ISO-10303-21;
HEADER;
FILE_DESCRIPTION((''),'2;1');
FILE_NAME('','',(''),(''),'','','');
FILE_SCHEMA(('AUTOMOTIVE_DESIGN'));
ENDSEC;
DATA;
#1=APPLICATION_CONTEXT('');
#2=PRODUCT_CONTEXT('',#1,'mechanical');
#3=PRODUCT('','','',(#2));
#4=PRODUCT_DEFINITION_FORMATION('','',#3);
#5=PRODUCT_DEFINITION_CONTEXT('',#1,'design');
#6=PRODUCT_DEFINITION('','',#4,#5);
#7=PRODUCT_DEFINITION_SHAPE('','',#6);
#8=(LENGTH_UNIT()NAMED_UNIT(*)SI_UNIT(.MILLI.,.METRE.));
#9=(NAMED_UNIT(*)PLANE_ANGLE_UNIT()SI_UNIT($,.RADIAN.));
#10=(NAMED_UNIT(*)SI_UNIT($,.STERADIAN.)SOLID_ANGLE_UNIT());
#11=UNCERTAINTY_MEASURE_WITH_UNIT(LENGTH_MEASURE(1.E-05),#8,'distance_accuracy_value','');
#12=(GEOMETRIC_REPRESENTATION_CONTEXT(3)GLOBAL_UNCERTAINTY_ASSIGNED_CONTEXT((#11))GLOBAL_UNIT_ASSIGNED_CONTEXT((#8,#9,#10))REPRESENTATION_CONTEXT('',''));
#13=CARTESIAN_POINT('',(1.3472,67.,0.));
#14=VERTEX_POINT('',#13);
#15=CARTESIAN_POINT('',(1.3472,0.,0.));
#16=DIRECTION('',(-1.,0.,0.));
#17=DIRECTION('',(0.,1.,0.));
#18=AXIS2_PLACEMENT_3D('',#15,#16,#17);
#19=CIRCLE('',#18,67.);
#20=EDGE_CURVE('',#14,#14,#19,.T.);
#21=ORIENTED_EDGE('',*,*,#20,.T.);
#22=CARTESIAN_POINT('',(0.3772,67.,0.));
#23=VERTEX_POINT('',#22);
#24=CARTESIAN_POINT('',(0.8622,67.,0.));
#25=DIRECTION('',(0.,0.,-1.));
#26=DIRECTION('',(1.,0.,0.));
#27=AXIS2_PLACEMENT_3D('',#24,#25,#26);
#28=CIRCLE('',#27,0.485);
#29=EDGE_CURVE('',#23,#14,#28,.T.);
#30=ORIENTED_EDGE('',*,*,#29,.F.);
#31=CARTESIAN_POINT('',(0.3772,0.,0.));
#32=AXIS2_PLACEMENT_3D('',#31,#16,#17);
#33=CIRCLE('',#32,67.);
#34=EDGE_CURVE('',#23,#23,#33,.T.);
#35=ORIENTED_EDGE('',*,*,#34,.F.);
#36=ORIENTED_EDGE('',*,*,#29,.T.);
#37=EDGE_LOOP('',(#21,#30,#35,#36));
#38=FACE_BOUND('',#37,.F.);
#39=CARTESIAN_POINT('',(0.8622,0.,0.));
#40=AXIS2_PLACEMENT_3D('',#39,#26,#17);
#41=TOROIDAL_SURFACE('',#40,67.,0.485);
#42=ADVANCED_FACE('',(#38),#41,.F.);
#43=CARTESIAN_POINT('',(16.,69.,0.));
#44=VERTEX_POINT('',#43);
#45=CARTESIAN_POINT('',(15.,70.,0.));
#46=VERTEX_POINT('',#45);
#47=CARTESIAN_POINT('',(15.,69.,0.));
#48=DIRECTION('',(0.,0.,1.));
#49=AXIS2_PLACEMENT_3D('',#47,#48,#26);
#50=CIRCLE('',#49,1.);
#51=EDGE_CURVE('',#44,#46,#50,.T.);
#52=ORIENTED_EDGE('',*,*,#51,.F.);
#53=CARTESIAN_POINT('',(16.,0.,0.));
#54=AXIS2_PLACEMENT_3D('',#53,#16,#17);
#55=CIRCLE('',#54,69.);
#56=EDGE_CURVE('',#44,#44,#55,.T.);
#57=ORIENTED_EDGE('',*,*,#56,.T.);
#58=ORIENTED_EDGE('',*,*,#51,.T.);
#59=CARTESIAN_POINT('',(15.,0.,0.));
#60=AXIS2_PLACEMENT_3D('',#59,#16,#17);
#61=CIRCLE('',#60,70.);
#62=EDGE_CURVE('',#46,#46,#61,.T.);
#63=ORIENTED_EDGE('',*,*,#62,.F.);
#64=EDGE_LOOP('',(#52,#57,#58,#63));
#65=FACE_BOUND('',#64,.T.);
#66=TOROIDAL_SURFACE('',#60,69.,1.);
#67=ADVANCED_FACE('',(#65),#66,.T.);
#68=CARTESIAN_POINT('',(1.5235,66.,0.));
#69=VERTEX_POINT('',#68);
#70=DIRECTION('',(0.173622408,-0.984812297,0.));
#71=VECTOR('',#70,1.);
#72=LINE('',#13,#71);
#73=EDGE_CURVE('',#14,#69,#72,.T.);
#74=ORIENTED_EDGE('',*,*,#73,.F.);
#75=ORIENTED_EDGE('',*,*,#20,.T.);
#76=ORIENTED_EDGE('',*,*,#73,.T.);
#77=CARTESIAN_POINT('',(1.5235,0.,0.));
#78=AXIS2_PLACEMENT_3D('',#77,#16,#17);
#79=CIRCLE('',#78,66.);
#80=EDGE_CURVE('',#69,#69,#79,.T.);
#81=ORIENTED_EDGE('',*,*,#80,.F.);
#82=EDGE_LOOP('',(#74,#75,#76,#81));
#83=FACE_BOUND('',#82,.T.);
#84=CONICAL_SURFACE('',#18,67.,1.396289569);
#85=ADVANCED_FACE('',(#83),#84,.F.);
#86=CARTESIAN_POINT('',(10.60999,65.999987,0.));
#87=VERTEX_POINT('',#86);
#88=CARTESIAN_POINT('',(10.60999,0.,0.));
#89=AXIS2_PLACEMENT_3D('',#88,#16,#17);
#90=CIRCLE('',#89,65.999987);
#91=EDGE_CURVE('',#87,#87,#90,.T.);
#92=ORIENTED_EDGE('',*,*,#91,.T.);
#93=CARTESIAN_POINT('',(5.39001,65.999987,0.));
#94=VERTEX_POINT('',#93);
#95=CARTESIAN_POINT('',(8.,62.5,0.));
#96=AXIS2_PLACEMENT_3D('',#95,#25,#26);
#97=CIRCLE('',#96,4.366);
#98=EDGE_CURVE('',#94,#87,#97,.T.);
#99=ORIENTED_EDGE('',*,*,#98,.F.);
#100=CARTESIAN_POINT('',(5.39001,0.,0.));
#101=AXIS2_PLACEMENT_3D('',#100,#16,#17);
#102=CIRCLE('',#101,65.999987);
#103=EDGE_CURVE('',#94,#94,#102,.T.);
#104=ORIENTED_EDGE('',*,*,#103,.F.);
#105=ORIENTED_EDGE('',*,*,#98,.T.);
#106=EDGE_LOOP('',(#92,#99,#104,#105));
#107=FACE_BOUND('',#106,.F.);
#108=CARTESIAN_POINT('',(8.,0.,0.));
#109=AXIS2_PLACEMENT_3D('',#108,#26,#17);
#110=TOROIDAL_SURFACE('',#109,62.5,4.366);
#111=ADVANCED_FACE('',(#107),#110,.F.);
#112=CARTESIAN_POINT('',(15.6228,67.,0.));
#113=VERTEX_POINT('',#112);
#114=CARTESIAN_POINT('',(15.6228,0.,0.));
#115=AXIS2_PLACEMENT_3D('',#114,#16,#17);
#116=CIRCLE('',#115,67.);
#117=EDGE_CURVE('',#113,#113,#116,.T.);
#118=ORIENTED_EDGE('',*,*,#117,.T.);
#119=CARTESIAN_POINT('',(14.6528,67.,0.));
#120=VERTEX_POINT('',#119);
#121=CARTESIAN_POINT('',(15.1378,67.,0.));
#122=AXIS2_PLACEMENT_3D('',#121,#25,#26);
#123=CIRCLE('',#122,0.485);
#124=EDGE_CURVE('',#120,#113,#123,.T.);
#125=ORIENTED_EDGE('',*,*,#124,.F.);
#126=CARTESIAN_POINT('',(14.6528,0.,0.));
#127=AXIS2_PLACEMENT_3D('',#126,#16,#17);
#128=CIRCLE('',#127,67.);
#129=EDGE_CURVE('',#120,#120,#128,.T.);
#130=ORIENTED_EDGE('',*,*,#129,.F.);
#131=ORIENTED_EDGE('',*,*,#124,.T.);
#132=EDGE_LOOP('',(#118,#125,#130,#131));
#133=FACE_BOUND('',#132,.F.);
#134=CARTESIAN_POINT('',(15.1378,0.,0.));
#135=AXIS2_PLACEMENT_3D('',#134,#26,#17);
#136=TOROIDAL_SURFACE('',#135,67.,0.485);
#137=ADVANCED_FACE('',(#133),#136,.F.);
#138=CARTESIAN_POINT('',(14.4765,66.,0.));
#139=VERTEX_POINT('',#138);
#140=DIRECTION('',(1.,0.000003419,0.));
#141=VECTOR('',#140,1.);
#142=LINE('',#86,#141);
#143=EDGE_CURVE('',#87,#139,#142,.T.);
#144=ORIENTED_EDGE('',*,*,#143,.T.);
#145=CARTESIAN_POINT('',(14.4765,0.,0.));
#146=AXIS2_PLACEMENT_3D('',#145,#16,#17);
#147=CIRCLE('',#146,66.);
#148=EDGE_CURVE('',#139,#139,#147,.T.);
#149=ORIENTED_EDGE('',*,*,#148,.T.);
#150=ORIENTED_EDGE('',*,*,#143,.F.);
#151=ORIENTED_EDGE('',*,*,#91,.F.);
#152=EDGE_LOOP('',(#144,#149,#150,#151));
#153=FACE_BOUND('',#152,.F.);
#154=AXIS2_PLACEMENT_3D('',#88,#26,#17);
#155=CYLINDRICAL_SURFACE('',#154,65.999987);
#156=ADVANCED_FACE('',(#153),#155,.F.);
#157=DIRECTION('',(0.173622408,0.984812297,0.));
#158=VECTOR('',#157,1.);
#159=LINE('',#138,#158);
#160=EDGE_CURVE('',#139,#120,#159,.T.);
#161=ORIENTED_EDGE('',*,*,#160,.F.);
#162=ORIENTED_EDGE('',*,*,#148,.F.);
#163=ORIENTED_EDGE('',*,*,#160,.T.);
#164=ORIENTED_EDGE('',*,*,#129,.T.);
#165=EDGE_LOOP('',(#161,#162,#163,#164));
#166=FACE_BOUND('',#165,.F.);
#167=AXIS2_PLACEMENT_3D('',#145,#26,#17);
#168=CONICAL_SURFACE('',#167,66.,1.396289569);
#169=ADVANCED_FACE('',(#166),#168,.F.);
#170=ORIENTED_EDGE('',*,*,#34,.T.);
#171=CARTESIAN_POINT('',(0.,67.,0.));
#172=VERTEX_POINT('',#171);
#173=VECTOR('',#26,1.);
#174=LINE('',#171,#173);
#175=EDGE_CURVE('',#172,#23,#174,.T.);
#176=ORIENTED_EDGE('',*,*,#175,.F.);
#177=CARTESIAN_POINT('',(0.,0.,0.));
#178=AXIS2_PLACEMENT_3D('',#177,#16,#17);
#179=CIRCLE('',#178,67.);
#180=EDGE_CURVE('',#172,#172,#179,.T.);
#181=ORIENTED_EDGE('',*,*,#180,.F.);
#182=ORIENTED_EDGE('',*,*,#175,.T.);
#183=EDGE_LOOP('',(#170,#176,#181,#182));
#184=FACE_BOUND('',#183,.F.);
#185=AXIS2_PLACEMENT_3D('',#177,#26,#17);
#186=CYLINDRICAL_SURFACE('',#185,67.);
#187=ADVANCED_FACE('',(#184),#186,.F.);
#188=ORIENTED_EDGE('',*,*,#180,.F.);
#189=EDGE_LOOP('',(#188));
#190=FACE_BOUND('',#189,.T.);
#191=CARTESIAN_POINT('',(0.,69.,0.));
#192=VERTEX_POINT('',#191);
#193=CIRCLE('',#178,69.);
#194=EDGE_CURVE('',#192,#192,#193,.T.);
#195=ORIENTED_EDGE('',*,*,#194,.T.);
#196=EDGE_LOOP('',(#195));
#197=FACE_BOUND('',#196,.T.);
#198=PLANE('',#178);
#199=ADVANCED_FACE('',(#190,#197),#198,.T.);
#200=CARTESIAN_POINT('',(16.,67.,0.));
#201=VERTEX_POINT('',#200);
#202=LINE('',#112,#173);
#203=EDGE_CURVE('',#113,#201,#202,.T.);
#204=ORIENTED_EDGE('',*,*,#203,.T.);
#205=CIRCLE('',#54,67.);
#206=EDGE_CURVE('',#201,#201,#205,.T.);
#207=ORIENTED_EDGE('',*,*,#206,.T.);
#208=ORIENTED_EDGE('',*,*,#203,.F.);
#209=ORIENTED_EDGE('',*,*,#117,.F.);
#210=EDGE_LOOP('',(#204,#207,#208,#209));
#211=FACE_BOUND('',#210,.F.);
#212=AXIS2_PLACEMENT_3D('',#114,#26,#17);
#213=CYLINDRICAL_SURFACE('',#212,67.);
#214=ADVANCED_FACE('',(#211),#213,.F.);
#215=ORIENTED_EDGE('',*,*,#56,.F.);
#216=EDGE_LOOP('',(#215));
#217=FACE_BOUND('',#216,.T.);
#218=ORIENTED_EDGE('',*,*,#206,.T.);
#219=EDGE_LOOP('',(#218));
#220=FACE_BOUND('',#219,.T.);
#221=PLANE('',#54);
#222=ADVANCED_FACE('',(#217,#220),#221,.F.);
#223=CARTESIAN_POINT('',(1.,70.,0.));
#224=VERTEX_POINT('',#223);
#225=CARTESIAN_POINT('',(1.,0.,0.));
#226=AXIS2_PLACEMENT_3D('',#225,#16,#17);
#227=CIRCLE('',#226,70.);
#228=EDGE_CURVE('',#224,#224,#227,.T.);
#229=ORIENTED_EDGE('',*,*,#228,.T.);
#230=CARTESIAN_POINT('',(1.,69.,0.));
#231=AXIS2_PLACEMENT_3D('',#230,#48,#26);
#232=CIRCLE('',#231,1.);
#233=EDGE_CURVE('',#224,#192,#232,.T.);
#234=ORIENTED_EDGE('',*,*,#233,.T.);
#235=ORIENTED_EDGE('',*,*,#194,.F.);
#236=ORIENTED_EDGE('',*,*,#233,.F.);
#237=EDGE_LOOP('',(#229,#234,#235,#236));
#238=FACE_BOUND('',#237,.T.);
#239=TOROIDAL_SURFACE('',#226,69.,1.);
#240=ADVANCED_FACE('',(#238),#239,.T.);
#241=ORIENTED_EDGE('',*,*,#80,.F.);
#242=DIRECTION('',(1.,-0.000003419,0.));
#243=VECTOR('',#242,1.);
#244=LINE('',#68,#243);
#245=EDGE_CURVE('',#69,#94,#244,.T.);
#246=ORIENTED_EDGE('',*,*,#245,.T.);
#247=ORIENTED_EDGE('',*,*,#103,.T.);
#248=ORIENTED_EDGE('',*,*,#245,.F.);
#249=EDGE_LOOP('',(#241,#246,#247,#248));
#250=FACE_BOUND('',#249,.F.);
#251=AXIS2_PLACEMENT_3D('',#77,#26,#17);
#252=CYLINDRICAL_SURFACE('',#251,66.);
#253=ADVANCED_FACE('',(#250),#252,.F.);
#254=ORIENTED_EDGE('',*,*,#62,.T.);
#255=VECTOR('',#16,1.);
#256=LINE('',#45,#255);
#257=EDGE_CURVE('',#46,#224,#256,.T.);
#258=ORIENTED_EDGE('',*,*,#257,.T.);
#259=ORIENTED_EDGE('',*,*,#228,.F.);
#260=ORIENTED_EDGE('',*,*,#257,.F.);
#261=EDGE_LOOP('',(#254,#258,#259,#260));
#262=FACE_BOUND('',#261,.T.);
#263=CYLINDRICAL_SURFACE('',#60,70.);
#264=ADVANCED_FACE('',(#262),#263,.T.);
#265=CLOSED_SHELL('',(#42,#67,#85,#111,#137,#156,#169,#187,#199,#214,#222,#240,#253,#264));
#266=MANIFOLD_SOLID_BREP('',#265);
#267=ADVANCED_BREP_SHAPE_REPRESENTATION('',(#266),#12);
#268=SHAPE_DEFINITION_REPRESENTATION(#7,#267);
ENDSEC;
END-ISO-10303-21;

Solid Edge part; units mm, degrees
sketch "Sketch1" plane through (0, 0, 0) normal (0, 0, 1) x (1, 0, 0)
  line L0 (0, 69) -> (0, 67)
  line L1 (0, 67) -> (0.3772, 67)
  arc A0 (0.3772, 67) -> (1.3472, 67) centre (0.8622, 67) cw
  line L2 (1.3472, 67) -> (1.5235, 66)
  line L3 (1.5235, 66) -> (5.39, 66)
  arc A1 (5.39, 66) -> (10.61, 66) centre (8, 62.5) cw
  line L4 (10.61, 66) -> (14.4765, 66)
  line L5 (14.4765, 66) -> (14.6528, 67)
  arc A2 (14.6528, 67) -> (15.6228, 67) centre (15.1378, 67) cw
  line L6 (15.6228, 67) -> (16, 67)
  line L7 (16, 67) -> (16, 69)
  arc A3 (16, 69) -> (15, 70) centre (15, 69) ccw
  line L8 (15, 70) -> (1, 70)
  arc A4 (1, 70) -> (0, 69) centre (1, 69) ccw
revolve "RevolvedProtrusion1" add sketch "Sketch1" angle 360 about axis through (15, 0, 0) along (-1, 0, 0)
